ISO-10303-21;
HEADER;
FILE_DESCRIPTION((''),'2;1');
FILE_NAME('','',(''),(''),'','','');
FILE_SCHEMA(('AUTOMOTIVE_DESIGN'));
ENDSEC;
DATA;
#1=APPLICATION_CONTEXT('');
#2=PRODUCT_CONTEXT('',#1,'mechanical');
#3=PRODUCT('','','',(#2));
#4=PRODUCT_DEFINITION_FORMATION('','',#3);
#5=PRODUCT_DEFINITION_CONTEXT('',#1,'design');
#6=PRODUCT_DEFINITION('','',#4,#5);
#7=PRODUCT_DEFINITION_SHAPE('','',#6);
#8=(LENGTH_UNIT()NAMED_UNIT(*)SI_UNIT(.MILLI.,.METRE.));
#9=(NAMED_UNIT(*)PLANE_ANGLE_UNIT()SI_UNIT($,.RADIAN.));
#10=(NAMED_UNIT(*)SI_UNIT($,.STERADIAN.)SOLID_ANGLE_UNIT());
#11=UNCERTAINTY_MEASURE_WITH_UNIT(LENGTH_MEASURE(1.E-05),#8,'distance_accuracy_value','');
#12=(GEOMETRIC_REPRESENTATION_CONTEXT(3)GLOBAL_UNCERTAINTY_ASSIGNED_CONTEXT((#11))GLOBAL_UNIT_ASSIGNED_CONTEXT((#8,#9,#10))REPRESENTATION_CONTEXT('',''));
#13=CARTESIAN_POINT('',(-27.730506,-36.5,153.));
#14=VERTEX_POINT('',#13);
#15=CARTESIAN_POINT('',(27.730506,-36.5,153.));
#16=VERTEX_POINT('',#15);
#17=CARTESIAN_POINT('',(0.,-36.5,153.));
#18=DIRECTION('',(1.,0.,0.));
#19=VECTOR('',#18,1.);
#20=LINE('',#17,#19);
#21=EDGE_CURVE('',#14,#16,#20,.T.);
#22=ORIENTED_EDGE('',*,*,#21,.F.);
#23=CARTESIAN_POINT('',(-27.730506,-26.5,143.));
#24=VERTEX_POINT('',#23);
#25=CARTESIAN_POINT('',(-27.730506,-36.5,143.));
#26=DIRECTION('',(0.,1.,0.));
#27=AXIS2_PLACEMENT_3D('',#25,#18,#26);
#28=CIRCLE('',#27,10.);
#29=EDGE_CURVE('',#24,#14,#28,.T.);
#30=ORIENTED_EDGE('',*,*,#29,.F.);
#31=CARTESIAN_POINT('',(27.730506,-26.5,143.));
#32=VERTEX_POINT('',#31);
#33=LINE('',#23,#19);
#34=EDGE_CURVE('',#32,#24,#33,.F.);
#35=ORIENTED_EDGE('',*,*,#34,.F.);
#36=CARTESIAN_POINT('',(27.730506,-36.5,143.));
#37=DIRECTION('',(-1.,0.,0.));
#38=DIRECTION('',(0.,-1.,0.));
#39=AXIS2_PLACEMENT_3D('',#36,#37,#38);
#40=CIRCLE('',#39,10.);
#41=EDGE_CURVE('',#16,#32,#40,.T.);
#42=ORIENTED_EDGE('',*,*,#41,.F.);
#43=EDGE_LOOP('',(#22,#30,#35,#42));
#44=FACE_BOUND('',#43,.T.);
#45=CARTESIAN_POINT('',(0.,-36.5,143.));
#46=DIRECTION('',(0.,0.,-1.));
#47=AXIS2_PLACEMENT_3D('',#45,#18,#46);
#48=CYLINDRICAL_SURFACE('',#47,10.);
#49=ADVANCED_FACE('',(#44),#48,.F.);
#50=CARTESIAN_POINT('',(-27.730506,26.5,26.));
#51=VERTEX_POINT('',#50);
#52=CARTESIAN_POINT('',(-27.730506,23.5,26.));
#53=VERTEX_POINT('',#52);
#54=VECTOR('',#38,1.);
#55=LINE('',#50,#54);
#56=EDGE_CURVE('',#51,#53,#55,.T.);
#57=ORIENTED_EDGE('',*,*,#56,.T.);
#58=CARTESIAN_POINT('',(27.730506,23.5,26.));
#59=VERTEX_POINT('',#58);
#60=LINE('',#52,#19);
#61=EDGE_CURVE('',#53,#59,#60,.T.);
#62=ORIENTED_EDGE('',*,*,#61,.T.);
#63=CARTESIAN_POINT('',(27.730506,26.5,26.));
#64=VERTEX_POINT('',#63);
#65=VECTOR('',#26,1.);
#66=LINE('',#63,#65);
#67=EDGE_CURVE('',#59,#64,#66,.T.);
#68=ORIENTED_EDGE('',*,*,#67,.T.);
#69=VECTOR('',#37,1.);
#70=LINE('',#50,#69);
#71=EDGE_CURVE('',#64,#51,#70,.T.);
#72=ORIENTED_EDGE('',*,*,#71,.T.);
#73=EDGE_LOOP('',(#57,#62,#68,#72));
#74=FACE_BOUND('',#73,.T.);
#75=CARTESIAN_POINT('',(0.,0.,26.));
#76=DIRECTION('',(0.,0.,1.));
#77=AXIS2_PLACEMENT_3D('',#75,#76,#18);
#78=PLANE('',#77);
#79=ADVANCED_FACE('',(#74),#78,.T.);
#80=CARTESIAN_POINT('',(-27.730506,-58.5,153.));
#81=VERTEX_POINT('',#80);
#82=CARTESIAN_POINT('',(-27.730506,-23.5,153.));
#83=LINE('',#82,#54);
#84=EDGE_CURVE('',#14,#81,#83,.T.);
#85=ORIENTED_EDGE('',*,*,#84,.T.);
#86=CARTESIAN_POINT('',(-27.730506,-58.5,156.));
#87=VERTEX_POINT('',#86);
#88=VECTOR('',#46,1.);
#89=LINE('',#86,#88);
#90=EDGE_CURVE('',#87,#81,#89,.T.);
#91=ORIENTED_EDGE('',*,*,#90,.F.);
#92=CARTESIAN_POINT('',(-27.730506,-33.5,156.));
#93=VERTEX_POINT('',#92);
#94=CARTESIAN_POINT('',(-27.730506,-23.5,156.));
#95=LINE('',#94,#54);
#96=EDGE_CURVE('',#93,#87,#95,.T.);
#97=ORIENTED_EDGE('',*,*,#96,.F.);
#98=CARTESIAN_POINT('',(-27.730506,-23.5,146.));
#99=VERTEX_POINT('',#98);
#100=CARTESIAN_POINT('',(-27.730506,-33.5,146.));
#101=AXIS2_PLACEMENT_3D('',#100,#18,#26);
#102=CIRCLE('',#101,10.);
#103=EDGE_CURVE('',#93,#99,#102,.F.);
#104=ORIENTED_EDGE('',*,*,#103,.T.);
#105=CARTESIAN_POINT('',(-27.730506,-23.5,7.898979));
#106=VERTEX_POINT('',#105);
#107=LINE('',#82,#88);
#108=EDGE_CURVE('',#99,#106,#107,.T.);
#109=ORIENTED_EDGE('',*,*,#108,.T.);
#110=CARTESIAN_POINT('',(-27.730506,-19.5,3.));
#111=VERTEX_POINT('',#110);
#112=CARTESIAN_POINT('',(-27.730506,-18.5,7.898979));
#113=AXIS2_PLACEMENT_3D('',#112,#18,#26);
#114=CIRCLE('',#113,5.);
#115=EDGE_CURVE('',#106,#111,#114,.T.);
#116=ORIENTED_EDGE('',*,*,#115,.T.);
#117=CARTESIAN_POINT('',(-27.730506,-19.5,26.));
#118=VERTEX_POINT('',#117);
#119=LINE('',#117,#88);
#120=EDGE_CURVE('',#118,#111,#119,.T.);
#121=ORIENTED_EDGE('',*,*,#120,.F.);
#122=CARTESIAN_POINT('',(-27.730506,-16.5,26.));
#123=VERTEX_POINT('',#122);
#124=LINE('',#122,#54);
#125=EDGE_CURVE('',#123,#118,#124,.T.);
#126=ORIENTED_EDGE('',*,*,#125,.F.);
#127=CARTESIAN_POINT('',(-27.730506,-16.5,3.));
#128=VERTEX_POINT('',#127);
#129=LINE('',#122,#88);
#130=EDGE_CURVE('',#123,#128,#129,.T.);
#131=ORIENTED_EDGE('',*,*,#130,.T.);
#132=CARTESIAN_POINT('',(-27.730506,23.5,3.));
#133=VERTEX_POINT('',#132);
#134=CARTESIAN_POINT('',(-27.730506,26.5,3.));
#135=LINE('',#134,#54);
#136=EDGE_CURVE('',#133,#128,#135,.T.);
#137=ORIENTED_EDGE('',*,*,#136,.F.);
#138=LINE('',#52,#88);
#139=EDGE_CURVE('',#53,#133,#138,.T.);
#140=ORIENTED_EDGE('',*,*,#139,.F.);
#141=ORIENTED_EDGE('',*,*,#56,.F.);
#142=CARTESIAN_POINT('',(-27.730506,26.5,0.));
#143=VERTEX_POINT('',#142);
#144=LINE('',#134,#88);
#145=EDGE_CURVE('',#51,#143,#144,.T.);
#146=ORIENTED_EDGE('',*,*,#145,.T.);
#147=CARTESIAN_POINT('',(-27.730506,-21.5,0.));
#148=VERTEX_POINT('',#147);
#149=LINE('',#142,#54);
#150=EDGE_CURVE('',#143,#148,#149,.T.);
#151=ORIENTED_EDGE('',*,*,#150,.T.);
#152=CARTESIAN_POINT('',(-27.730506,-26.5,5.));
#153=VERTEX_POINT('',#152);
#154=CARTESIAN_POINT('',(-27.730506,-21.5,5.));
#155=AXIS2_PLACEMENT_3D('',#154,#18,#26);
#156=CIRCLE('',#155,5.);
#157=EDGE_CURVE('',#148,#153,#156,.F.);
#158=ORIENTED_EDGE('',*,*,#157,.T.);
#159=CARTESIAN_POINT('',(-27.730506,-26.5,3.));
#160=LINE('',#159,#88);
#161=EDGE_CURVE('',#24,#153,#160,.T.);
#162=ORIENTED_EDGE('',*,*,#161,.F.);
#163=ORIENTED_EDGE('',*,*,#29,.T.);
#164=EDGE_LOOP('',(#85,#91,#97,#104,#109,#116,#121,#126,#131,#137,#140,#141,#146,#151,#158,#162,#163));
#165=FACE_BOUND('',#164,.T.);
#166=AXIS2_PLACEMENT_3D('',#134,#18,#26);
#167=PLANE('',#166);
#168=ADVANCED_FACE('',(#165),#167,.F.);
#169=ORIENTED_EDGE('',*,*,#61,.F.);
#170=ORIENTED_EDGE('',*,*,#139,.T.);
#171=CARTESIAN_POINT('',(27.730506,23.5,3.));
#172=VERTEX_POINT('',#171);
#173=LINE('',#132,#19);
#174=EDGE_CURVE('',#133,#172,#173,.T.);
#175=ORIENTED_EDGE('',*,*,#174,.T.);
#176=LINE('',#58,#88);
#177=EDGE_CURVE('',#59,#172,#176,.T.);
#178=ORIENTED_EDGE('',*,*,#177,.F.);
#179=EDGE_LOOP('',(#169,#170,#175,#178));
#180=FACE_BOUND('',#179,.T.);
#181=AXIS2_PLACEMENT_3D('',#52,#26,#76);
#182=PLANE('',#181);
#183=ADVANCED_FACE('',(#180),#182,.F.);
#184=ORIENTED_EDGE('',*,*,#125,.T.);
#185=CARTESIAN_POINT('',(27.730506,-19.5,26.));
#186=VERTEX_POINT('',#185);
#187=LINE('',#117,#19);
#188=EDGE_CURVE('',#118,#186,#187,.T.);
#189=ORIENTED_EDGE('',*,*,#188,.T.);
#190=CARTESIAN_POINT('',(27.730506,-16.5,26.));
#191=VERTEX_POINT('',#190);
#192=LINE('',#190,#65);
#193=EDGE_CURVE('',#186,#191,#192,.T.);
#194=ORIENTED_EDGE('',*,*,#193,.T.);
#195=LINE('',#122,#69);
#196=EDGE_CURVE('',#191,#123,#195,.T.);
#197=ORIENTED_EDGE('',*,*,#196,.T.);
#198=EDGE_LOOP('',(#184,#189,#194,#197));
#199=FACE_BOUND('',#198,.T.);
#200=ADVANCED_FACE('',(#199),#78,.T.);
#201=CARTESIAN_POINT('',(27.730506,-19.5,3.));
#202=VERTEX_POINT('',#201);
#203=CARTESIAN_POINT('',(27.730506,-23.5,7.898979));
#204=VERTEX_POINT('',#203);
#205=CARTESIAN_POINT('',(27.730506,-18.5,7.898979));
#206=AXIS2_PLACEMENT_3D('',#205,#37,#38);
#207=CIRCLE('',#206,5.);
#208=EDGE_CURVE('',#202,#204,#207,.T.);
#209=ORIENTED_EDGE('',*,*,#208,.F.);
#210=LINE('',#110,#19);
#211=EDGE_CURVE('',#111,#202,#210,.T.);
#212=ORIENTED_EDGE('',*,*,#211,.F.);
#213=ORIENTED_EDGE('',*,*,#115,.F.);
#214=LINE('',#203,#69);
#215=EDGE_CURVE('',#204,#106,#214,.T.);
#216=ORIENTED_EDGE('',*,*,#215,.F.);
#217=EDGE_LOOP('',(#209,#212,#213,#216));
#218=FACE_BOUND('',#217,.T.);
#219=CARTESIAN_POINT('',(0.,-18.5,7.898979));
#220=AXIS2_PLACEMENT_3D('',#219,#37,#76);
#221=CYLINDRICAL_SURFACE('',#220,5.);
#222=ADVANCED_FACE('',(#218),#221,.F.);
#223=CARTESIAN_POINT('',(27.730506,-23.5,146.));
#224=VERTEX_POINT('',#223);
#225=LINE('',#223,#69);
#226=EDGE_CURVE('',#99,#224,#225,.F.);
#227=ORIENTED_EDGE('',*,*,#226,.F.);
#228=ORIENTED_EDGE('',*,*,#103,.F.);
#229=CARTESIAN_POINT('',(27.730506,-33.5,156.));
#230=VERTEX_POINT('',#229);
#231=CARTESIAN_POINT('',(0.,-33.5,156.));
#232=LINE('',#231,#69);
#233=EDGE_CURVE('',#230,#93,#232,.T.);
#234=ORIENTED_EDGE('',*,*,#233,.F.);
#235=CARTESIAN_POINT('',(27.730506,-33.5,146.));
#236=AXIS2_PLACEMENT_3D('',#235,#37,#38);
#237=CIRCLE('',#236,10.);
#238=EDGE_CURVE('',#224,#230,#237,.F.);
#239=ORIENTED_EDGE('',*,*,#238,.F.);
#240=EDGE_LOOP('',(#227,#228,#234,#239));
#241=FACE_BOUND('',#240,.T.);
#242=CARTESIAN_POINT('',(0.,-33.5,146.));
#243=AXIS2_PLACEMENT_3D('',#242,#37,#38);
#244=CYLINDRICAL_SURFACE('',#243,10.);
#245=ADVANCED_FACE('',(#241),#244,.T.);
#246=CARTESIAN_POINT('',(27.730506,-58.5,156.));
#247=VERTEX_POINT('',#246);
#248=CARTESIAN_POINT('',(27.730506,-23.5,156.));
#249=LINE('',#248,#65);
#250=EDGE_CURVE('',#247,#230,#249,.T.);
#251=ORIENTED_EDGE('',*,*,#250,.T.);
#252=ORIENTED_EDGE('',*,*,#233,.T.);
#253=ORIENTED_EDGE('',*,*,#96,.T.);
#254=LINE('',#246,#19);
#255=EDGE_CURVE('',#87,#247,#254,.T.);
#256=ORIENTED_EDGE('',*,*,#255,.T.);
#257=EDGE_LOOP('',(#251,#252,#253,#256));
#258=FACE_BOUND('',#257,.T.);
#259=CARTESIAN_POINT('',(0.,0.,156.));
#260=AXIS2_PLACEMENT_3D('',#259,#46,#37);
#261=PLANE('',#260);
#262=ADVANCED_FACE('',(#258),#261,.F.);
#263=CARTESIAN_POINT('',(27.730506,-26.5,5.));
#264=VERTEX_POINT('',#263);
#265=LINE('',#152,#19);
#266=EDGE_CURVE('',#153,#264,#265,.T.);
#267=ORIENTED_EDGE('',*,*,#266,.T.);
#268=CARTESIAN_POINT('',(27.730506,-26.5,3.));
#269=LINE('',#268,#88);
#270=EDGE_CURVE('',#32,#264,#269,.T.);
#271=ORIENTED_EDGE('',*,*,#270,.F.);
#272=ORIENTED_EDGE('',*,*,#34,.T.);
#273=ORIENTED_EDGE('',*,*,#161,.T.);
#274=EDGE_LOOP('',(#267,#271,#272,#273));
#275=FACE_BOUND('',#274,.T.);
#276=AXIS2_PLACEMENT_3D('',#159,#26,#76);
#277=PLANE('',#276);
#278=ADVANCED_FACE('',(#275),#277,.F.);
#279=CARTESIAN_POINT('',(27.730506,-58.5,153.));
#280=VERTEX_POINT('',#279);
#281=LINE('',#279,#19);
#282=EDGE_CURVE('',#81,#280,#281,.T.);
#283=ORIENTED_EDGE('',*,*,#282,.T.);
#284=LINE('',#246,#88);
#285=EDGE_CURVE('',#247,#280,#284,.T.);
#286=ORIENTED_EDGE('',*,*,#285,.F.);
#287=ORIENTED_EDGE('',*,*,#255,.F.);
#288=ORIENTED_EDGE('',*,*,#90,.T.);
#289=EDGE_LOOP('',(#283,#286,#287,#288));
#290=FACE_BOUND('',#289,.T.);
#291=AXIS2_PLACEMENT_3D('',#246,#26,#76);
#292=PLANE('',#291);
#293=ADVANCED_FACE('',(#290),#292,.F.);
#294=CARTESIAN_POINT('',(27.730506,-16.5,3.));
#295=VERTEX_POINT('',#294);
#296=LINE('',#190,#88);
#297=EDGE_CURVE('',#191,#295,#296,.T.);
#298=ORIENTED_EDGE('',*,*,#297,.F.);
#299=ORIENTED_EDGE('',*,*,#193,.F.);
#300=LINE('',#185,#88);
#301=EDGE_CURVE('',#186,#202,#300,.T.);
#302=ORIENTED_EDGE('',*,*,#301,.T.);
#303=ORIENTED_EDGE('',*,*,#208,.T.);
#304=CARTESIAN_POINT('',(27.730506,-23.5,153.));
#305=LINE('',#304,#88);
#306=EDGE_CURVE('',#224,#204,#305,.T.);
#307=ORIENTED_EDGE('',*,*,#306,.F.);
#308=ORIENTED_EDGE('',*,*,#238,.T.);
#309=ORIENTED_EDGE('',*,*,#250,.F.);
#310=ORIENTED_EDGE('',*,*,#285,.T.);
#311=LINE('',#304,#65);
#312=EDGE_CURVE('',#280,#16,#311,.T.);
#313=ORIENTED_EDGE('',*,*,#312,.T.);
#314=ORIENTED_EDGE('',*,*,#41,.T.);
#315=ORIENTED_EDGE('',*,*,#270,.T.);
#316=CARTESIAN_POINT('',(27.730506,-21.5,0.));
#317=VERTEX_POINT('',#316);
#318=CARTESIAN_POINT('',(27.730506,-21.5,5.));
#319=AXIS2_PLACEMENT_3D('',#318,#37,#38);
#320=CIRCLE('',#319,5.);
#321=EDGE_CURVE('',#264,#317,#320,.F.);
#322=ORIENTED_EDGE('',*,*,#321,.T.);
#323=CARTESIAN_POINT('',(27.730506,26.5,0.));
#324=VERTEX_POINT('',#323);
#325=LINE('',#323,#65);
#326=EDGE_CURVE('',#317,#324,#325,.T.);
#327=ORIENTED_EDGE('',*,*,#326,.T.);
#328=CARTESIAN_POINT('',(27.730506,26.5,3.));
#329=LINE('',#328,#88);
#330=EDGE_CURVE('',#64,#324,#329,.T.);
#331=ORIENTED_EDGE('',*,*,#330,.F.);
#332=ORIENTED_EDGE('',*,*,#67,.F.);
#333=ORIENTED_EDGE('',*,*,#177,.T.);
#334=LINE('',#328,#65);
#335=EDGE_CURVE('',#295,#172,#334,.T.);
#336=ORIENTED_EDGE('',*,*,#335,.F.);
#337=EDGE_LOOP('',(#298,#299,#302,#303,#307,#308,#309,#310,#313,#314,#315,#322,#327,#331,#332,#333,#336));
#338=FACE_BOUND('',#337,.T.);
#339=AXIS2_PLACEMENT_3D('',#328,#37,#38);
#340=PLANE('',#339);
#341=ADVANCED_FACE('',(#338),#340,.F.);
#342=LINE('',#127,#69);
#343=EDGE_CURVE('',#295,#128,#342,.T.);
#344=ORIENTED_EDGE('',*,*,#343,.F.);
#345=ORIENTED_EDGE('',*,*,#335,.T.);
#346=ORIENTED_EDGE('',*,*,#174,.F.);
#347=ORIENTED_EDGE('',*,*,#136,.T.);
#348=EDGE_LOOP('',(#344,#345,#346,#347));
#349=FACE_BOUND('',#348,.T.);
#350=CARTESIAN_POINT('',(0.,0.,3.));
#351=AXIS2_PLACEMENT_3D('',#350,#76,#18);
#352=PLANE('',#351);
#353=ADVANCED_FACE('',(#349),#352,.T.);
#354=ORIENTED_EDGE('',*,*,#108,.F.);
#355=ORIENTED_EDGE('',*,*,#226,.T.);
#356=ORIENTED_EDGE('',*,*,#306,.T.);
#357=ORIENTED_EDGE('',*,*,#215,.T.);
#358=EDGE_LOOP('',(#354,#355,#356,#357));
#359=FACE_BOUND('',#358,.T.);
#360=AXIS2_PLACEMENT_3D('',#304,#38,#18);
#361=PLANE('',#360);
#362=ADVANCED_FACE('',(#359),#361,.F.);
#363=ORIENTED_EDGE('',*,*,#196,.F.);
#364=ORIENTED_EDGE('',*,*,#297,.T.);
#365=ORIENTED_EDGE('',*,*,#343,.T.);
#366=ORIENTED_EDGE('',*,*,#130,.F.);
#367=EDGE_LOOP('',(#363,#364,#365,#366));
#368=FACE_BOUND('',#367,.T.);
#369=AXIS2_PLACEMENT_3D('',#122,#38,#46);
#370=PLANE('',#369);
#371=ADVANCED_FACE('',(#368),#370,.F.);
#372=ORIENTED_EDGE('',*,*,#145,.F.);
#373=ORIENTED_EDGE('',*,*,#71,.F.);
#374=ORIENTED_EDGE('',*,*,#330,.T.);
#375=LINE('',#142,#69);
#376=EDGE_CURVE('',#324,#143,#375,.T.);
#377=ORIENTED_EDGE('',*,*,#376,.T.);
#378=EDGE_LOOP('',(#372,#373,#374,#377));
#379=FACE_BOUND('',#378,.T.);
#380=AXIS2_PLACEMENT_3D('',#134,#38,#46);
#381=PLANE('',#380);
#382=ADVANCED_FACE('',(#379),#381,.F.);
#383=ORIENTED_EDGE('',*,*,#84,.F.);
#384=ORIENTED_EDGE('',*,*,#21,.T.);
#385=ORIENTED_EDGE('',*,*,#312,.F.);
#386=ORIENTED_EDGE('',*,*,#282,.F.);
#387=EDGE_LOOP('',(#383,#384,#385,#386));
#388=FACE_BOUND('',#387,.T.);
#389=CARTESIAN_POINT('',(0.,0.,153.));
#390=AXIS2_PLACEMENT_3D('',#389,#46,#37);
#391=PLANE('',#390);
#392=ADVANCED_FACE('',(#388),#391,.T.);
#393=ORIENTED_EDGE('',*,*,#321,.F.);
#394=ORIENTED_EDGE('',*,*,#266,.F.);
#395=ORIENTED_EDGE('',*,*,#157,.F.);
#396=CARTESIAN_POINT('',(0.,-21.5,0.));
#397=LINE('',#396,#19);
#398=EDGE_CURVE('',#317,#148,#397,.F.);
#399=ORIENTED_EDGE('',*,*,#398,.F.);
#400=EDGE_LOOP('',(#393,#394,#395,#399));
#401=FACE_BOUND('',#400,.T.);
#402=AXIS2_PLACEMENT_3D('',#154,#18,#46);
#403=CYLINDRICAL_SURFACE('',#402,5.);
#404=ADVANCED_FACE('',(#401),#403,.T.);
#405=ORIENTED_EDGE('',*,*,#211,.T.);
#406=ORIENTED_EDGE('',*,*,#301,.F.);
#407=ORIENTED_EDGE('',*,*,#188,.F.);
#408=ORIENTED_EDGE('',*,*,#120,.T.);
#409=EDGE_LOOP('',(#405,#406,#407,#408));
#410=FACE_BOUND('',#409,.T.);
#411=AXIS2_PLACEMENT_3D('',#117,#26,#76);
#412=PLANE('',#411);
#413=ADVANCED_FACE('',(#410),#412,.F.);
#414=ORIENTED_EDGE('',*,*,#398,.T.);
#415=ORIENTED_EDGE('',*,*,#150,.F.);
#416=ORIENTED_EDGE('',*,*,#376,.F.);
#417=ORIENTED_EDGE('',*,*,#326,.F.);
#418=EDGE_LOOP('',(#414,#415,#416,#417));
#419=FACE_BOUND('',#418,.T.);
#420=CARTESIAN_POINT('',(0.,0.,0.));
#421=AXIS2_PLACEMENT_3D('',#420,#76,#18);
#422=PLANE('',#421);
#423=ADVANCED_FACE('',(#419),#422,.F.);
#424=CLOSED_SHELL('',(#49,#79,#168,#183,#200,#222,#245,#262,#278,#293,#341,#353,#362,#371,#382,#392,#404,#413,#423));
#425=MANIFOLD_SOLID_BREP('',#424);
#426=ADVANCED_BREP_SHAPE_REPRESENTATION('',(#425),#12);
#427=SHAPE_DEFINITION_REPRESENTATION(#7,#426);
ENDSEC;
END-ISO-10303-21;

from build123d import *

# Parameters (mm, degrees)
SKETCH6_W           = 55.461011284
SKETCH6_H           = 53
BOSS_EXTRUDE5_DEPTH = 3
SKETCH7_W           = 55.461011284
SKETCH7_H           = 3
BOSS_EXTRUDE6_DEPTH = 23
SKETCH8_W           = 55.461011284
SKETCH8_H           = 3
BOSS_EXTRUDE7_DEPTH = 150
SKETCH9_W           = 55.461011284
SKETCH9_H           = 35
BOSS_EXTRUDE8_DEPTH = 3
FILLET2_R           = 10
FILLET3_R           = 10
FILLET5_R           = 5
FILLET6_R           = 5


with BuildPart() as part:
    # Sketch6 → Boss-Extrude5 (new body)
    with BuildSketch(Plane.XY):
        Rectangle(SKETCH6_W, SKETCH6_H)
    extrude(amount=BOSS_EXTRUDE5_DEPTH)

    # Sketch7 → Boss-Extrude6 (add)
    with BuildSketch(Plane.XY.offset(3)):
        with Locations((0, 25)):
            Rectangle(SKETCH7_W, SKETCH7_H)
        with Locations((0, -18)):
            Rectangle(SKETCH7_W, SKETCH7_H)
    extrude(amount=BOSS_EXTRUDE6_DEPTH)

    # Sketch8 → Boss-Extrude7 (add)
    with BuildSketch(Plane.XY.offset(3)):
        with Locations((0, -25)):
            Rectangle(SKETCH8_W, SKETCH8_H)
    extrude(amount=BOSS_EXTRUDE7_DEPTH)

    # Sketch9 → Boss-Extrude8 (add)
    with BuildSketch(Plane.XY.offset(153)):
        with Locations((0, -41)):
            Rectangle(SKETCH9_W, SKETCH9_H)
    extrude(amount=BOSS_EXTRUDE8_DEPTH)

    # Fillet2
    fillet2_edges = [part.edges().sort_by_distance(p)[0] for p in [
        (0, -26.5, 153),
    ]]
    fillet(fillet2_edges, radius=FILLET2_R)

    # Fillet3
    fillet3_edges = [part.edges().sort_by_distance(p)[0] for p in [
        (0, -23.5, 156),
    ]]
    fillet(fillet3_edges, radius=FILLET3_R)

    # Fillet5
    fillet5_edges = [part.edges().sort_by_distance(p)[0] for p in [
        (0, -26.5, 0),
    ]]
    fillet(fillet5_edges, radius=FILLET5_R)

    # Fillet6
    # the kernel refuses this fillet: 5 mm, written as the material it adds along each edge
    with BuildSketch(Plane(origin=(-27.730505642, -23.5, 3), x_dir=(0, 0, 1), z_dir=(1, 0, 0))) as fillet6_piece_1:
        with BuildLine():
            CenterArc((4.898979486, -5), FILLET6_R, 90, 78.463040967)
            Line((0, -4), (-0.09797959, -3.98))
            ThreePointArc((-0.09797959, -3.98), (-0.1, -2), (-0.1, 0))
            Line((-0.1, 0), (0, 0.1))
            Line((0, 0.1), (4.898979486, 0.1))
            Line((4.898979486, 0.1), (4.898979486, 0))
        make_face()
    extrude(amount=55.461011285)


solid = part.part
